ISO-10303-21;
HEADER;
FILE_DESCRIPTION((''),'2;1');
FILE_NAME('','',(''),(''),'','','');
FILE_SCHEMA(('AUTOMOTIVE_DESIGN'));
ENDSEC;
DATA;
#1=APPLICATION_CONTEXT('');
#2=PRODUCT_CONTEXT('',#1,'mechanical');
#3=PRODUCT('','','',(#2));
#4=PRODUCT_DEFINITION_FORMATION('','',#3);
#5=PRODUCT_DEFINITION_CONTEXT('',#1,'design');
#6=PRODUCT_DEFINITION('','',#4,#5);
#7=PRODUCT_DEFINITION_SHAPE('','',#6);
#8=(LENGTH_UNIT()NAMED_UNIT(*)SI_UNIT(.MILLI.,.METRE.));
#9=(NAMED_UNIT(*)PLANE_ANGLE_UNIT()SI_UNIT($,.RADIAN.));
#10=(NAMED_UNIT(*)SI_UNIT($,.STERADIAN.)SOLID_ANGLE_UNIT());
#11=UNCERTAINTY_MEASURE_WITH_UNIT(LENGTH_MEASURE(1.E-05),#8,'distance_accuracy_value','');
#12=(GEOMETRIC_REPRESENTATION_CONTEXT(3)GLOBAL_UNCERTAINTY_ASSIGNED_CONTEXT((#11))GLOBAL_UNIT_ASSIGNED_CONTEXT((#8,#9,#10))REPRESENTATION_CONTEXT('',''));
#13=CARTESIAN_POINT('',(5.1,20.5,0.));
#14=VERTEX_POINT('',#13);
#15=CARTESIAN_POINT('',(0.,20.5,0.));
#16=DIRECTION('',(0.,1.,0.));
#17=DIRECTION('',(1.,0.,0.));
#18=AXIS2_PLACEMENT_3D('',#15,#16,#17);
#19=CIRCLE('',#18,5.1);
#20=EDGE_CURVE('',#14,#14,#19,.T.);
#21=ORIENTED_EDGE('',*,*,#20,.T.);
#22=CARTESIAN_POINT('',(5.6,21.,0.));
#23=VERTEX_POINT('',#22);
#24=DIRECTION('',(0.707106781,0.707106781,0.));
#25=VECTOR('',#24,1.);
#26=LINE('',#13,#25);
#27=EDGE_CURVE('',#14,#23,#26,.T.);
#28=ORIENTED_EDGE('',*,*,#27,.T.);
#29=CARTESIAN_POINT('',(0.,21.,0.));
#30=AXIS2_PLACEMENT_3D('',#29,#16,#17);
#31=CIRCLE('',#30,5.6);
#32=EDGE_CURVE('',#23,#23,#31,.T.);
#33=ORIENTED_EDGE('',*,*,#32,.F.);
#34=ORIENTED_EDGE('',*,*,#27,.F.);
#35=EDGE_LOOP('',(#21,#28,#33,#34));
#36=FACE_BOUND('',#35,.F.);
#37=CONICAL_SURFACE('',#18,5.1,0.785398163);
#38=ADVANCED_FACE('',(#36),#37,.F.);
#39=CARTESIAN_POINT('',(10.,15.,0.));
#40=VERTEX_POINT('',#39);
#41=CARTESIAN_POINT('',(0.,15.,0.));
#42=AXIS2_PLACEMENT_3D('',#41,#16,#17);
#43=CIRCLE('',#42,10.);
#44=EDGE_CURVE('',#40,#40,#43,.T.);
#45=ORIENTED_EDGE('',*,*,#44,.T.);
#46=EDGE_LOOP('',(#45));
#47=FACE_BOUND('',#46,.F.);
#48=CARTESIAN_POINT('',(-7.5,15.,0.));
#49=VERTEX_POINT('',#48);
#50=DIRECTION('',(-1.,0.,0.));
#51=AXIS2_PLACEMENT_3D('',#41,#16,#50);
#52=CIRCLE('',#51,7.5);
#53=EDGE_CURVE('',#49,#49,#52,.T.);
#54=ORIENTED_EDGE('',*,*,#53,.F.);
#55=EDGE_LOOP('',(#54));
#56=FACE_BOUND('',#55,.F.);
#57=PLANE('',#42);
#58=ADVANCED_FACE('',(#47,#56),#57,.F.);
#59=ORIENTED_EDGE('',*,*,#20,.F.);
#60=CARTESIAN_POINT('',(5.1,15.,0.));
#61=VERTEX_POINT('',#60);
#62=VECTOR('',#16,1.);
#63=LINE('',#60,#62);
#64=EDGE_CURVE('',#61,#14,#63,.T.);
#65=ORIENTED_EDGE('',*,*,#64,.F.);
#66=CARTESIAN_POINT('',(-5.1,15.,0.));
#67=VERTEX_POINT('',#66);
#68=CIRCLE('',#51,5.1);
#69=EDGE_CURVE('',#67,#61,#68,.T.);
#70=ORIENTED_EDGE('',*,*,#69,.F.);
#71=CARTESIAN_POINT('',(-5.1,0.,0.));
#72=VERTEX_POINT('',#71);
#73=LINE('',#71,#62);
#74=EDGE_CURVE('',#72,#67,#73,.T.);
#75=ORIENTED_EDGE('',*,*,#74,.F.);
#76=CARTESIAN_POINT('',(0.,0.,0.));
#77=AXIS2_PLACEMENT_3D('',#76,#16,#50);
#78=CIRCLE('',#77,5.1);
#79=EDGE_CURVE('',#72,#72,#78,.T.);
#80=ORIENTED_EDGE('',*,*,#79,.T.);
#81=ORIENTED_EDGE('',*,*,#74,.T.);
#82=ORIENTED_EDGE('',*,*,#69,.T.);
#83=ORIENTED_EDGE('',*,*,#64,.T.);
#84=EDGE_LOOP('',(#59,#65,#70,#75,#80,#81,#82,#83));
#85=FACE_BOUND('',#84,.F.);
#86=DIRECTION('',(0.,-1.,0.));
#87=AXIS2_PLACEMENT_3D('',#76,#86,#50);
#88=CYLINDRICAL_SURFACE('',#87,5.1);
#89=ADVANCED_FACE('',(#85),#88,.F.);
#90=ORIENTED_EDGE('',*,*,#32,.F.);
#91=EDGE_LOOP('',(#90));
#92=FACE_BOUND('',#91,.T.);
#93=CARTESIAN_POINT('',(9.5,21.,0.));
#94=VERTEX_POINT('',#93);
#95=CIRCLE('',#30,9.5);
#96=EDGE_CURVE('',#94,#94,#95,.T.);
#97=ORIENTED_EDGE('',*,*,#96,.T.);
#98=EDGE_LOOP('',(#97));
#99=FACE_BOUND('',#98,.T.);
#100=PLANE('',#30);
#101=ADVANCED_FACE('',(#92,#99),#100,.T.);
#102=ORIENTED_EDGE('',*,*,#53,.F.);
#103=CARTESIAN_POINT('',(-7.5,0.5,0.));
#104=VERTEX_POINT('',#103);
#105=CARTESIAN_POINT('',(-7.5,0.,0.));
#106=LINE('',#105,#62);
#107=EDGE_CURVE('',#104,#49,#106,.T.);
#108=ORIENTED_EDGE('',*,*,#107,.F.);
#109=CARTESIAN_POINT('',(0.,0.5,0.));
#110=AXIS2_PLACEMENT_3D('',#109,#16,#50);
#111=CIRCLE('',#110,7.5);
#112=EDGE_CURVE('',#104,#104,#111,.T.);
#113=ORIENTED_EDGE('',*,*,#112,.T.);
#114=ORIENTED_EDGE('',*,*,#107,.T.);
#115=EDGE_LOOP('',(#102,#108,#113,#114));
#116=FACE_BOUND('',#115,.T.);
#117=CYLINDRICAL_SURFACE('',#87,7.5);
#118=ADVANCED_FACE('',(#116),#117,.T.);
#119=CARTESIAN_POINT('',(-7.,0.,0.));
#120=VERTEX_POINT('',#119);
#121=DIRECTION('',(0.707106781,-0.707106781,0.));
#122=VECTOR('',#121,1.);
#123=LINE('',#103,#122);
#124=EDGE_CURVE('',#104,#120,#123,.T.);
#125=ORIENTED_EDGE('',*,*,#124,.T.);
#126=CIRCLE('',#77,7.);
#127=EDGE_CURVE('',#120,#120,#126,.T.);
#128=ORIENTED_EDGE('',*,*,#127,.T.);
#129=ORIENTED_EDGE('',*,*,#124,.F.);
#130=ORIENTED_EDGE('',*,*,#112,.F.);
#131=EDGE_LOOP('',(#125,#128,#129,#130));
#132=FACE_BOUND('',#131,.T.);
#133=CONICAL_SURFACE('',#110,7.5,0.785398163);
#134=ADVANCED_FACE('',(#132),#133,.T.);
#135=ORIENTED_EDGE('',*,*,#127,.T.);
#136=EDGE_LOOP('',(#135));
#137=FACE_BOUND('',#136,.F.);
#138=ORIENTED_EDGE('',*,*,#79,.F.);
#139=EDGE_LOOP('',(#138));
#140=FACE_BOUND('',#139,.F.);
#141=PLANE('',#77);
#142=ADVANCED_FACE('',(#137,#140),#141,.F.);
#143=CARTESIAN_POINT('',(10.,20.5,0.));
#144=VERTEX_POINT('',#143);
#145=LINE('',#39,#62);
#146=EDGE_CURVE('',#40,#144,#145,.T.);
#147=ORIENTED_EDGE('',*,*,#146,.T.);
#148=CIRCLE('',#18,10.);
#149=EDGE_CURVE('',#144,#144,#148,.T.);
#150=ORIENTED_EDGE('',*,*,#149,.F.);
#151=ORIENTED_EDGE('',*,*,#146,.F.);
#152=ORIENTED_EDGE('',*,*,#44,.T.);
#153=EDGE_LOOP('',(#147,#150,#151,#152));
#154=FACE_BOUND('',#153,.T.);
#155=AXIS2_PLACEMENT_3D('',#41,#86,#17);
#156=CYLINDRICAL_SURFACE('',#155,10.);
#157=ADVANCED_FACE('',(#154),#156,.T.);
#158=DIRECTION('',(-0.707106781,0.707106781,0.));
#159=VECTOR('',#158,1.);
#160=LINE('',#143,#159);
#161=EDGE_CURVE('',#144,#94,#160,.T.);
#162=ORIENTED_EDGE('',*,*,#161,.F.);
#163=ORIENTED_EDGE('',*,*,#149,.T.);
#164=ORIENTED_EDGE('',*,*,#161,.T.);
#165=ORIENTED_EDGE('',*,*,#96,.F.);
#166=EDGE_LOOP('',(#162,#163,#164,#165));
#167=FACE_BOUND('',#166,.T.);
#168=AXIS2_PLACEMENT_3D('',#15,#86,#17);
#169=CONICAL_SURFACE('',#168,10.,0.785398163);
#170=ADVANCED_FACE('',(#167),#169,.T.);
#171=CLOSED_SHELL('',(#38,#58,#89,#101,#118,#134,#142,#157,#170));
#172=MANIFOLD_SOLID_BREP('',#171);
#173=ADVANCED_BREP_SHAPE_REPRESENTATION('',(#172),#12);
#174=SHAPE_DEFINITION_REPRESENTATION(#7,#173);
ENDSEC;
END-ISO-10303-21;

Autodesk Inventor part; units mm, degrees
ref_plane "YZ Plane" through (0, 0, 0) normal (1, 0, 0) x (0, 1, 0)
ref_plane "XZ Plane" through (0, 0, 0) normal (0, 1, 0) x (-1, 0, 0)
ref_plane "XY Plane" through (0, 0, 0) normal (0, 0, 1) x (1, 0, 0)
sketch "Sketch1" plane through (0, 0, 0) normal (0, 1, 0) x (-1, 0, 0)
  circle A0 centre (0, 0) radius 7.5
  circle A1 centre (0, 0) radius 5.1
  dimension "d0" = 15
  dimension "d1" = 10.2
extrude "Extrusion1" add sketch "Sketch1" along normal blind 15
sketch "Sketch2" plane through (0, 15, 0) normal (0, 1, 0) x (1, 0, 0)
  circle A0 centre (0, 0) radius 7.5 projected
  circle A1 centre (0, 0) radius 7.5 projected
  circle A2 centre (0, 0) radius 5.1 projected
  circle A3 centre (0, 0) radius 10
  dimension "d4" = 20
extrude "Extrusion2" add sketch "Sketch2" along normal blind 6 contours A0 | A3
chamfer "Chamfer1" distance 0.5 angle 45 3 edges at (-5.1, 21, 0) (-10, 21, 0) (7.5, 0, 0)
properties part number "Bøsning_beam_bund_3DPrint"
